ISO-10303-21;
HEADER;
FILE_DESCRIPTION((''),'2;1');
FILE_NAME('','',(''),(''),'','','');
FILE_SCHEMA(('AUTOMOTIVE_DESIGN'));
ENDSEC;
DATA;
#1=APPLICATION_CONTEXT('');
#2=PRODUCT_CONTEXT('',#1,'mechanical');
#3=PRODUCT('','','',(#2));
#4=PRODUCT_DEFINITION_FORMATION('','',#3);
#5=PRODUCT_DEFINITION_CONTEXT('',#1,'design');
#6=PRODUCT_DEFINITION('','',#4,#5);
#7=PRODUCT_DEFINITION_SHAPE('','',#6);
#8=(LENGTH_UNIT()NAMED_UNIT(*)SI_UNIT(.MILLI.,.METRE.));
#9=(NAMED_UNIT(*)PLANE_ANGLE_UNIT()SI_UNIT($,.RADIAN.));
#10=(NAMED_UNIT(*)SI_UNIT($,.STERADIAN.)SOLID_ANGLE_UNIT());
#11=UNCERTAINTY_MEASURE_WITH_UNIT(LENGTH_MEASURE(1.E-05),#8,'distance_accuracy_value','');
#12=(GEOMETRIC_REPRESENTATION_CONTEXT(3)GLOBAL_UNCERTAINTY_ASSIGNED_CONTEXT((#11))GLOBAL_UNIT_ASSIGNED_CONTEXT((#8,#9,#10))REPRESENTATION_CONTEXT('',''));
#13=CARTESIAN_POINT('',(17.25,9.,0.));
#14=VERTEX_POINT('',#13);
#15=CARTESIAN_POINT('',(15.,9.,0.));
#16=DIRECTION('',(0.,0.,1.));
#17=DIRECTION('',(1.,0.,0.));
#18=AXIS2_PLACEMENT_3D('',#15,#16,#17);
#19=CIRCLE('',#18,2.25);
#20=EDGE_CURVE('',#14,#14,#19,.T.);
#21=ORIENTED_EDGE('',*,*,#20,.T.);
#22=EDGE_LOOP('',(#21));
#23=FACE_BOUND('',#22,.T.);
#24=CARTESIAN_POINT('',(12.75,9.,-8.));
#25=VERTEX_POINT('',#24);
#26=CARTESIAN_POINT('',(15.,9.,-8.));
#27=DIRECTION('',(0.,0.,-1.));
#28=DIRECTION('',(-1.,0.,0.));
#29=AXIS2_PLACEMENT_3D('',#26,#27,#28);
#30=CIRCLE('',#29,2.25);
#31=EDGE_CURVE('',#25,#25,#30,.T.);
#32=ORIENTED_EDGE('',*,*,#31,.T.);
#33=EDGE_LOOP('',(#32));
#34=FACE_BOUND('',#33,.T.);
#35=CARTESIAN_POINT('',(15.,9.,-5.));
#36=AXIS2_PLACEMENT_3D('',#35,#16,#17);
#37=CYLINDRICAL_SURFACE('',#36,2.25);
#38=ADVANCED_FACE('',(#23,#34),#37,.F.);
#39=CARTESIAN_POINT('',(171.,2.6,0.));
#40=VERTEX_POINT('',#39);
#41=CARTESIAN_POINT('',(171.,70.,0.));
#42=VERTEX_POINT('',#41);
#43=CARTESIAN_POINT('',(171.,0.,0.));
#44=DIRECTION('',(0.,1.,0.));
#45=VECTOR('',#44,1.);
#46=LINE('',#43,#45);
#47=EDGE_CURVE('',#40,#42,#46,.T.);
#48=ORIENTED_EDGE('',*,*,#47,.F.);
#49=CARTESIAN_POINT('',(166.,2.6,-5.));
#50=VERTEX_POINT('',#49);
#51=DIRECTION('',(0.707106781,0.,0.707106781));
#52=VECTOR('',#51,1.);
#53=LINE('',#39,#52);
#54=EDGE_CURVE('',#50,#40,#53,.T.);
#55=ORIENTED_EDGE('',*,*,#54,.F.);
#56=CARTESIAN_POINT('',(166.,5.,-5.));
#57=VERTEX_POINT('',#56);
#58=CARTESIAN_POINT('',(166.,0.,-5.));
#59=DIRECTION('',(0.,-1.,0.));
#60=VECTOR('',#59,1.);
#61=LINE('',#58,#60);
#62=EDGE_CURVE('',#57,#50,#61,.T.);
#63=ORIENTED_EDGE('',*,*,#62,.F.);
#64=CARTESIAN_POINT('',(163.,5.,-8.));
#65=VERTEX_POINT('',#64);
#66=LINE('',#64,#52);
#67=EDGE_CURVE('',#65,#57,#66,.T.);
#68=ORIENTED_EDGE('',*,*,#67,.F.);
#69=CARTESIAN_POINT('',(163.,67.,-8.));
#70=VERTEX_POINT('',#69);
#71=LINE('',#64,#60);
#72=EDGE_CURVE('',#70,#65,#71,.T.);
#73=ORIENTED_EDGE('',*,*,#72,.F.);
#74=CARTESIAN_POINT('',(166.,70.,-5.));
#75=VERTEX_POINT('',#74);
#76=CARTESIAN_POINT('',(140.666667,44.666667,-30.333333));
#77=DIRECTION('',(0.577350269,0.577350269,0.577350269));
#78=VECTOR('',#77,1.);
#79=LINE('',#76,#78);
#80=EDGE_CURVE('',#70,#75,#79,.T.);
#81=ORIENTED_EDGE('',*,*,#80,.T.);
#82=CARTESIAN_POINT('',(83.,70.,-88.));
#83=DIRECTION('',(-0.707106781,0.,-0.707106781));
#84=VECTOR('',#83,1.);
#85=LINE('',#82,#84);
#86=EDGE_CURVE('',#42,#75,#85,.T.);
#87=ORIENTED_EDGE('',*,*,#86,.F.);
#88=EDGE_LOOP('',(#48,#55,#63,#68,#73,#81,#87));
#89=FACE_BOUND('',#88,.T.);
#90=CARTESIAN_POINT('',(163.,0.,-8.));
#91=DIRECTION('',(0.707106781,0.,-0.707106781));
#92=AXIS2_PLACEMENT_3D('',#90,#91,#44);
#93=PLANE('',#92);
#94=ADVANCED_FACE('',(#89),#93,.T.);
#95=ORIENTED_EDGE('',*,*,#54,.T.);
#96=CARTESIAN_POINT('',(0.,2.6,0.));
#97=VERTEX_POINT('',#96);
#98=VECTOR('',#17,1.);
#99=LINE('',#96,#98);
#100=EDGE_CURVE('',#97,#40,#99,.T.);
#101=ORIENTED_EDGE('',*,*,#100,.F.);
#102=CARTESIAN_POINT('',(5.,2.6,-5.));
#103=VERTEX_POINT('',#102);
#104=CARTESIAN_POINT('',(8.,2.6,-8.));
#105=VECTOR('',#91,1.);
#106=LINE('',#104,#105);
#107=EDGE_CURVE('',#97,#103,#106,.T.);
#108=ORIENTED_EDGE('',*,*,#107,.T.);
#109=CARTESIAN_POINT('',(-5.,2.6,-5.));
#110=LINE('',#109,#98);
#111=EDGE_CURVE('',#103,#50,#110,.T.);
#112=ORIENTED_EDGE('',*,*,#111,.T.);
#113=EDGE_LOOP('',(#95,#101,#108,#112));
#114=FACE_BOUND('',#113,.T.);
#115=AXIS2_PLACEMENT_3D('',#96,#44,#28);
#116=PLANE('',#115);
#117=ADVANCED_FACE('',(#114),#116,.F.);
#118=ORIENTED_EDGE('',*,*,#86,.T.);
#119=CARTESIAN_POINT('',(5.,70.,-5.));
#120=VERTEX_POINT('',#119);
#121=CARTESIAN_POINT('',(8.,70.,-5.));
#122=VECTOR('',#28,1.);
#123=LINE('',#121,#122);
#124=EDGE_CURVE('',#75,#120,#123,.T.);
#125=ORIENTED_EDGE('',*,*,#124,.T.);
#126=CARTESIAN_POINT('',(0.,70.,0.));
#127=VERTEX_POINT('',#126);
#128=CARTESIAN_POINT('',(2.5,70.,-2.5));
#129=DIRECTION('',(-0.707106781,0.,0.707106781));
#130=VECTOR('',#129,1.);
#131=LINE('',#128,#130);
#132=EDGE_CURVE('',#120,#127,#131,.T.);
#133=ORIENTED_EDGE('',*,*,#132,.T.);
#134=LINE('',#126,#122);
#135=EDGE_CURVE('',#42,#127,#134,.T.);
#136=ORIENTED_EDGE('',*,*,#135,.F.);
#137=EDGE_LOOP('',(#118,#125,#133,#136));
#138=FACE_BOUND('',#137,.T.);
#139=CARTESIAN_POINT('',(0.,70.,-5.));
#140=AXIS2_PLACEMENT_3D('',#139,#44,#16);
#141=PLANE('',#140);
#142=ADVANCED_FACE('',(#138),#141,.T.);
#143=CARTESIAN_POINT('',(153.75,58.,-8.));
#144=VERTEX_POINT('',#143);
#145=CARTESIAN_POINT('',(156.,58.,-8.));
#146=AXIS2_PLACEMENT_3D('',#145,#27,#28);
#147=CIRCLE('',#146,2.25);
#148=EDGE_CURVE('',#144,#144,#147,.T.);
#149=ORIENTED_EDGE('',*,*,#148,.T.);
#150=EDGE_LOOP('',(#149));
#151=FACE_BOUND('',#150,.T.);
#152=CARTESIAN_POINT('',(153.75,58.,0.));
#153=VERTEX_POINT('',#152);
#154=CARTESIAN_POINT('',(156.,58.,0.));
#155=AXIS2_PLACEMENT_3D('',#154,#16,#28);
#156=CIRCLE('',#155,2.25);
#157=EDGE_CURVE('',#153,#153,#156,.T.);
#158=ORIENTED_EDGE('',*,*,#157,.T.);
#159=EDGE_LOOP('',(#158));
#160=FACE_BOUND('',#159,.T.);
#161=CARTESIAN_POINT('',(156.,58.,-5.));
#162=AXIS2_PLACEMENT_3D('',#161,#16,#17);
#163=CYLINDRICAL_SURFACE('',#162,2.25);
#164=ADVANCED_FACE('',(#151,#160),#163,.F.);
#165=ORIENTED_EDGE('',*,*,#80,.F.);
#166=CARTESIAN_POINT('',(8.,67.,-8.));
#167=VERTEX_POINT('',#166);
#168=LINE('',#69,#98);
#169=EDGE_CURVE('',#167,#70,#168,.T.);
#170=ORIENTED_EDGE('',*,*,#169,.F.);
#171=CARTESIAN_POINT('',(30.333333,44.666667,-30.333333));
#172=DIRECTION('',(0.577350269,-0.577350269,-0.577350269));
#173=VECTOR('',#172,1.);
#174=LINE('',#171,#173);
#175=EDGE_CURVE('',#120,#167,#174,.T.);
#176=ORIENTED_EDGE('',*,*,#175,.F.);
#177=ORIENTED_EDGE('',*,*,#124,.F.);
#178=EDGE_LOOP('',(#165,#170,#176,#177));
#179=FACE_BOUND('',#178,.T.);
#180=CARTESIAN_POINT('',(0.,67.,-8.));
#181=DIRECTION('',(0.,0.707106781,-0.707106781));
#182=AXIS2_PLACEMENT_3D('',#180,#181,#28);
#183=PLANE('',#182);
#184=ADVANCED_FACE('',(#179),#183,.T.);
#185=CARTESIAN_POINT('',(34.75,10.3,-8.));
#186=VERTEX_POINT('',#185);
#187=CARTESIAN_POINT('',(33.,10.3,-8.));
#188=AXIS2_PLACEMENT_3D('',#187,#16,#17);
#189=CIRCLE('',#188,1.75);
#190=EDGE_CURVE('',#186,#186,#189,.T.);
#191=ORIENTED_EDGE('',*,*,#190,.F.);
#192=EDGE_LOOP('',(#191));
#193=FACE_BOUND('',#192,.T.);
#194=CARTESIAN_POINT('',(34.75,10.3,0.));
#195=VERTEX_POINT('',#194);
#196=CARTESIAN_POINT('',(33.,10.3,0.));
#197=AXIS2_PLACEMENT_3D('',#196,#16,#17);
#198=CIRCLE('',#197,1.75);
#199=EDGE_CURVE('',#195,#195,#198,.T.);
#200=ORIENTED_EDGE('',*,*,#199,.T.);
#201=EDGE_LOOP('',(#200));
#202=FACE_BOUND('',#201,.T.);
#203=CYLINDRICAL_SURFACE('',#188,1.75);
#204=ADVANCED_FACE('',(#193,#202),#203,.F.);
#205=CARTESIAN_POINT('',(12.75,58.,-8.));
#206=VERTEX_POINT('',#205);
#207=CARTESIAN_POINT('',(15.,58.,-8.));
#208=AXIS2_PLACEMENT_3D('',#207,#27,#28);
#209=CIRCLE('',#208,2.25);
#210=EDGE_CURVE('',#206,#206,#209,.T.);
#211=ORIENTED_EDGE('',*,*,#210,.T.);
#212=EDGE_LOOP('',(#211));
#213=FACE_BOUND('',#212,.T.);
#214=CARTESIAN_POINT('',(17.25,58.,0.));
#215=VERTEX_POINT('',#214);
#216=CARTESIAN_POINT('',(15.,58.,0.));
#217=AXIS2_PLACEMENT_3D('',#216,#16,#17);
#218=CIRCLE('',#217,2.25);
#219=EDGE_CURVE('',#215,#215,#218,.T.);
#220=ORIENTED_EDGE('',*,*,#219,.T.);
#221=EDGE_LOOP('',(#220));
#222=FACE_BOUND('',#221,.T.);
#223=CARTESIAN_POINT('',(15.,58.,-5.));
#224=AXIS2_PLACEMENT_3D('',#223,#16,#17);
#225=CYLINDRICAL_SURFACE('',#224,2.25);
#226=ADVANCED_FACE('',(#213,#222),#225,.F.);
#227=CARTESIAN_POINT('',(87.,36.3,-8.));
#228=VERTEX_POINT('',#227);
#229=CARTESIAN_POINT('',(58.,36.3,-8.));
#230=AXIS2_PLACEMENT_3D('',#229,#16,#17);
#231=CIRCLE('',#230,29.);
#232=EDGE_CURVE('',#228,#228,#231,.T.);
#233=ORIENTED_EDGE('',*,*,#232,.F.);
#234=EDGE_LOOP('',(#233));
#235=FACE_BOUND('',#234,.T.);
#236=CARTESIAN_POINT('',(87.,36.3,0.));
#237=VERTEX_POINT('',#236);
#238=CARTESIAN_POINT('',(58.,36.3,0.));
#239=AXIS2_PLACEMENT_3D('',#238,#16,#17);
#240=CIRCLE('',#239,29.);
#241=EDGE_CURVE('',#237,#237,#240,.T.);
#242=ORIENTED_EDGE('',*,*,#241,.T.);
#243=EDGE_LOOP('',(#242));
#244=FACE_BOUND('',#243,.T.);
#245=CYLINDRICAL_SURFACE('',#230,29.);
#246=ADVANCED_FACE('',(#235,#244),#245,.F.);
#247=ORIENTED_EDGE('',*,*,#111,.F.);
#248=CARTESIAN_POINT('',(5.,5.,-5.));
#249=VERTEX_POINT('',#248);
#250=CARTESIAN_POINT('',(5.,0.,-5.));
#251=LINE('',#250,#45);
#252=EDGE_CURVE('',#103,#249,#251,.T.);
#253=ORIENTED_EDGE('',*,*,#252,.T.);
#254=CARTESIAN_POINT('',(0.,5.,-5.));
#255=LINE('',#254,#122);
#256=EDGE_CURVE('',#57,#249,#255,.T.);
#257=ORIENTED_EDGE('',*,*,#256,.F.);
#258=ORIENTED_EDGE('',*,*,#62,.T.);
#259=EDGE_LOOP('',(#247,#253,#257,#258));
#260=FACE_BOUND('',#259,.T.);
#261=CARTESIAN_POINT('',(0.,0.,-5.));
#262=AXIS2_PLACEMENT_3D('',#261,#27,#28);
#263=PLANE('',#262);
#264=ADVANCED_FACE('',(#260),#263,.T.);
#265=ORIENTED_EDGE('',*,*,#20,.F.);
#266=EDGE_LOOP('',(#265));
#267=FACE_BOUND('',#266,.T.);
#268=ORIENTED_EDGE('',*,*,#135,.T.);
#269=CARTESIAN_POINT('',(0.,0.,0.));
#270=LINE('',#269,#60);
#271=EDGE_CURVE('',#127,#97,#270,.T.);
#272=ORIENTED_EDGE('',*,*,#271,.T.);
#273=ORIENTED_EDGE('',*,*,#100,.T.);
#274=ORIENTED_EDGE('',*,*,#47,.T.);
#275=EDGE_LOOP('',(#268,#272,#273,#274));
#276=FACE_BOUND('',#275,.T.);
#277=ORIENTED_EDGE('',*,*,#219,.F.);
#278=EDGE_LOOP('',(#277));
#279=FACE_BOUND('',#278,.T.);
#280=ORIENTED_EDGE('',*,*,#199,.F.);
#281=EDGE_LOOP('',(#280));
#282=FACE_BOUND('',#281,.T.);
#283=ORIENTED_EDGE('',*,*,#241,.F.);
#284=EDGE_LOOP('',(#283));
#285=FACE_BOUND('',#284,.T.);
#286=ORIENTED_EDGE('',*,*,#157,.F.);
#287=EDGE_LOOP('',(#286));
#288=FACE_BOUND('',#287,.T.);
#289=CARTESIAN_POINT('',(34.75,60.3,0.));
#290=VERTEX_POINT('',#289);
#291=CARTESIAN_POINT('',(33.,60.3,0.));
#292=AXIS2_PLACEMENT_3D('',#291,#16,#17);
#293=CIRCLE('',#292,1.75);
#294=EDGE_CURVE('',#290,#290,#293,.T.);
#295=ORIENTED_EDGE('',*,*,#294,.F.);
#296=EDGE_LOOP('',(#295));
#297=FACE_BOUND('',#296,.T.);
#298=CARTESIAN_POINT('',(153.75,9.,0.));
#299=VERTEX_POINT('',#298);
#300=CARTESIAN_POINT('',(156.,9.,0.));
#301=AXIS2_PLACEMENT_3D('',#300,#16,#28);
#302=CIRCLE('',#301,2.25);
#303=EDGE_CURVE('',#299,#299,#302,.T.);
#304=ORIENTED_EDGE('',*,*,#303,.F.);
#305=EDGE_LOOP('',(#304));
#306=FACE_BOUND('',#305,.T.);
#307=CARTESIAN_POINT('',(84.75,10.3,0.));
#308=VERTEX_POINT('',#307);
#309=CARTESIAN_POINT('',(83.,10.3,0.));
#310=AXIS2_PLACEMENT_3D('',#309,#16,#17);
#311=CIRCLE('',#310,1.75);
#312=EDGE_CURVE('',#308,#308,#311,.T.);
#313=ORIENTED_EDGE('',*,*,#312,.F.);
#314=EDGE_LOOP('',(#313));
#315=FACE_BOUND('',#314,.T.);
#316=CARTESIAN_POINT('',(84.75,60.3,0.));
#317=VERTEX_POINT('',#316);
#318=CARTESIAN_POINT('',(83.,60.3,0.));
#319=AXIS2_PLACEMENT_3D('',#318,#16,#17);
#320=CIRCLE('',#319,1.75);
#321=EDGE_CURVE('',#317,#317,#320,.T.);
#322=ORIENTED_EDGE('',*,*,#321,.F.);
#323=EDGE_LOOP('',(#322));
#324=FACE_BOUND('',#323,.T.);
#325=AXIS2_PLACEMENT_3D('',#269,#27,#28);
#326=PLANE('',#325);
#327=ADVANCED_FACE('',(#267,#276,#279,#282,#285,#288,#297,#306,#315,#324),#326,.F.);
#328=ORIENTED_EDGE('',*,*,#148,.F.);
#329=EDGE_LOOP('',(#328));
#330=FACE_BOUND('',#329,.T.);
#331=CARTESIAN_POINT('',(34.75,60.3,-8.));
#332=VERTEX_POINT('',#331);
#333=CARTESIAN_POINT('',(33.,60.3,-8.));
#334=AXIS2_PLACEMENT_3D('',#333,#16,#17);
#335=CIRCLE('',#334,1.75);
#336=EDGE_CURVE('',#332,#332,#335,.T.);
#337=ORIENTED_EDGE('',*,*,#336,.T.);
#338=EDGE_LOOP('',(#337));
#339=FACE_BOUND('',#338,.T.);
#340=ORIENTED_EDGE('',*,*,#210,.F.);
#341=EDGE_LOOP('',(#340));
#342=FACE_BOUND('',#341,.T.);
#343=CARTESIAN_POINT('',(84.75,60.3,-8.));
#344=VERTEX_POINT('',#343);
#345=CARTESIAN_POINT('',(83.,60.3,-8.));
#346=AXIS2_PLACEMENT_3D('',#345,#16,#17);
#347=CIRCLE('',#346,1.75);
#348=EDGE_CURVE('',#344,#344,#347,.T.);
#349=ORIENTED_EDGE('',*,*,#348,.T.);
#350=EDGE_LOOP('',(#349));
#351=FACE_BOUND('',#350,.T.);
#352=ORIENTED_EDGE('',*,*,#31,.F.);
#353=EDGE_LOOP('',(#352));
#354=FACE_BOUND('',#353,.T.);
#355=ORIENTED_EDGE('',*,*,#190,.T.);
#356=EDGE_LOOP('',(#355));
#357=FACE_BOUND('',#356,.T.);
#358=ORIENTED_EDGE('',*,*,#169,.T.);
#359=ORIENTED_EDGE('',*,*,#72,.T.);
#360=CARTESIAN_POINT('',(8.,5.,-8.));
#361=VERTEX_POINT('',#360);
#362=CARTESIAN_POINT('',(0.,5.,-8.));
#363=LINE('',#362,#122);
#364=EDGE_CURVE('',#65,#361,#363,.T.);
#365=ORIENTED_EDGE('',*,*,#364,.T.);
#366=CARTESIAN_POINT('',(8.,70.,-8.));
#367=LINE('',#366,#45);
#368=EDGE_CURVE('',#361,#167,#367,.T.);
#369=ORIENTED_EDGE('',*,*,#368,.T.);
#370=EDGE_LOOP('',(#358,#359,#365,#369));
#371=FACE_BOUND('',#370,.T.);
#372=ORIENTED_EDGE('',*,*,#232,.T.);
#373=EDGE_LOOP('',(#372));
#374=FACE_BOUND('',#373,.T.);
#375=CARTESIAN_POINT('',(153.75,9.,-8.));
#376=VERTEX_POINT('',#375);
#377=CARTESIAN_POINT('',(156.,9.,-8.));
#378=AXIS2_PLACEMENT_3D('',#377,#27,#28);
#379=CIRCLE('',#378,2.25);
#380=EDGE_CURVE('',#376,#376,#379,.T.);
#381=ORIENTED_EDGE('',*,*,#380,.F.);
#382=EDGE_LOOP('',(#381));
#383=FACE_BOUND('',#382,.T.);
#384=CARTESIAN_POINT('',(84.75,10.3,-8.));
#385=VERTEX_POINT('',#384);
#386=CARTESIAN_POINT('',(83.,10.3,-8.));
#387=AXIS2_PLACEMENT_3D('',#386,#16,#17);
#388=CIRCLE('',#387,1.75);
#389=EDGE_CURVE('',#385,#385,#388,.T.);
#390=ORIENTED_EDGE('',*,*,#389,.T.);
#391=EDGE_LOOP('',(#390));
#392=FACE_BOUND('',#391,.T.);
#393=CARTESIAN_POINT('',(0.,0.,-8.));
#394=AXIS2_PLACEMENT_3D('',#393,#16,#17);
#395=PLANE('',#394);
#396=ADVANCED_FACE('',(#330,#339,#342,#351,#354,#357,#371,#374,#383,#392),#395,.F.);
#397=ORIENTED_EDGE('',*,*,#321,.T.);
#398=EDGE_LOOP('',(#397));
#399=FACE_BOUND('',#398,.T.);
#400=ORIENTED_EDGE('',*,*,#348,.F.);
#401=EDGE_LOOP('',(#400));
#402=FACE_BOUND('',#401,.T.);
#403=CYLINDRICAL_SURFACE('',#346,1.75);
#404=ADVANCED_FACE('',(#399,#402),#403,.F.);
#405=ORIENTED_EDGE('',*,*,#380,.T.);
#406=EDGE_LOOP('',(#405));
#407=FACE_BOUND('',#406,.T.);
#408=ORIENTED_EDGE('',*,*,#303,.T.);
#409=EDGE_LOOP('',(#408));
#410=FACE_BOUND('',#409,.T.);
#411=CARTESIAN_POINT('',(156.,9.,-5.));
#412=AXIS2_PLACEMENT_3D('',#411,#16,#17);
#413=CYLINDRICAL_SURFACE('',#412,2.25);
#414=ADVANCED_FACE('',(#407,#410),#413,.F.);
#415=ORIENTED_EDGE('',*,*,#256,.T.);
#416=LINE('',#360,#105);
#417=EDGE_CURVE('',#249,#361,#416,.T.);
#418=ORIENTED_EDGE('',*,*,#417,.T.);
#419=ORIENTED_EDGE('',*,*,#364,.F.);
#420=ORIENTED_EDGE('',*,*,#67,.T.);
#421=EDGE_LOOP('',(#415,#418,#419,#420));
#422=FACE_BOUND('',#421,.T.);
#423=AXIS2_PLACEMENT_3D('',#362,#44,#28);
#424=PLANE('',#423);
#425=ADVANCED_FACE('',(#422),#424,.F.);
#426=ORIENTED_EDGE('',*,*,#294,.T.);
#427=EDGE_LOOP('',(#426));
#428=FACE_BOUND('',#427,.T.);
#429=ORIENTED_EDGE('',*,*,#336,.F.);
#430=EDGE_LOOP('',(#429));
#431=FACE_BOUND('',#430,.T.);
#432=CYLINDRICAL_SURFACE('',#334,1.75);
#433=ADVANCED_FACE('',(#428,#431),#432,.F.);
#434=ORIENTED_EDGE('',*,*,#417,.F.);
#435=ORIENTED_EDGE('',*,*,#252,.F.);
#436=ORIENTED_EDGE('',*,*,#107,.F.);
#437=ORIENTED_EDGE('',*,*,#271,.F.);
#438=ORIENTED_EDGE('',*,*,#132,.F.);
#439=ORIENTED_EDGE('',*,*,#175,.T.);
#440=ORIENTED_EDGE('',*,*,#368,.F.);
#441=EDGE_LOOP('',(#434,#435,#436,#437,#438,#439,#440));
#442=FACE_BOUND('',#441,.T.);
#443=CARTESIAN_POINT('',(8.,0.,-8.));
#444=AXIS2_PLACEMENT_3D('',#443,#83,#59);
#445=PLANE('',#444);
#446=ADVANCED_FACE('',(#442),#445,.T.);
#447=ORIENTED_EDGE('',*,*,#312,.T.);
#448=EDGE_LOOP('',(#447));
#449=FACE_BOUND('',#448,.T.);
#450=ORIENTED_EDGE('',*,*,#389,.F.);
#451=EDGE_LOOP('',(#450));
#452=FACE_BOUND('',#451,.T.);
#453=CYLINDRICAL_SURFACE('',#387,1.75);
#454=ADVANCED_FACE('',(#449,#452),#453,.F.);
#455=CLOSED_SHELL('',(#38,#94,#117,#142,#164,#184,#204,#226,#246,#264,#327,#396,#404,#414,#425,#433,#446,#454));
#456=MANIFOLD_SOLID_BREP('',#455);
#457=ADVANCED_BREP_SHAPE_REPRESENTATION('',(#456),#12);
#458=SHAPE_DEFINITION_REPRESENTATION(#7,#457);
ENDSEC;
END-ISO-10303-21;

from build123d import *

# Parameters (mm, degrees)
SKETCH1_W           = 171
SKETCH1_H           = 70
SKETCH1_R           = 2.25
BOSS_EXTRUDE1_DEPTH = 5
SKETCH2_W           = 171
SKETCH2_H           = 65
SKETCH2_R           = 2.25
BOSS_EXTRUDE2_DEPTH = 3
CHAMFER1_SIZE       = 8
CHAMFER3_SIZE       = 3
SKETCH3_W           = 7.071067812
SKETCH3_H           = 2.6
CUT_EXTRUDE1_DEPTH  = 199.002168661
SKETCH4_R           = 29
SKETCH4_R_2         = 1.75
CUT_EXTRUDE2_DEPTH  = 185.945938047


with BuildPart() as part:
    # Sketch1 → Boss-Extrude1 (new body)
    with BuildSketch(Plane.XY):
        with Locations((85.5, 35)):
            Rectangle(SKETCH1_W, SKETCH1_H)
        with Locations((15, 9)):
            Circle(SKETCH1_R, mode=Mode.SUBTRACT)
        with Locations(Location((156, 9, 0), (0, 0, 180))):
            Circle(SKETCH1_R, mode=Mode.SUBTRACT)
        with Locations((15, 58)):
            Circle(SKETCH1_R, mode=Mode.SUBTRACT)
        with Locations(Location((156, 58, 0), (0, 0, 180))):
            Circle(SKETCH1_R, mode=Mode.SUBTRACT)
    extrude(amount=-BOSS_EXTRUDE1_DEPTH)

    # Sketch2 → Boss-Extrude2 (add)
    with BuildSketch(Plane(origin=(0, 0, -5), x_dir=(-1, 0, 0), z_dir=(0, 0, -1))):
        with Locations((-85.5, 37.5)):
            Rectangle(SKETCH2_W, SKETCH2_H)
        with Locations(Location((-15, 9, 0), (0, 0, 180))):
            Circle(SKETCH2_R, mode=Mode.SUBTRACT)
        with Locations((-156, 9)):
            Circle(SKETCH2_R, mode=Mode.SUBTRACT)
        with Locations(Location((-15, 58, 0), (0, 0, 180))):
            Circle(SKETCH2_R, mode=Mode.SUBTRACT)
        with Locations((-156, 58)):
            Circle(SKETCH2_R, mode=Mode.SUBTRACT)
    extrude(amount=BOSS_EXTRUDE2_DEPTH)

    # Chamfer1
    # the kernel refuses this chamfer: 8 mm, written as the material it takes off along each edge
    with BuildSketch(Plane(origin=(171, -15.573463904, -8), x_dir=(-0.9996219169112968, 0, -0.027495876610586296), z_dir=(0, 1, 0)), Plane(origin=(0, 90.573463904, -8), x_dir=(0.9996219169112968, 0, -0.027495876610586275), z_dir=(0, -1, 0))) as chamfer1_piece_1:
        Polygon((CHAMFER1_SIZE * 0.999621916911, CHAMFER1_SIZE * 0.0274958766106), (-CHAMFER1_SIZE * 0.0274958766106, CHAMFER1_SIZE * 0.999621916911), (0, 0), align=None)
    extrude(amount=106.146927807, mode=Mode.SUBTRACT)

    # Chamfer3
    chamfer3_edges = [part.edges().sort_by_distance(p)[0] for p in [
        (85.5, 70, -8),
    ]]
    chamfer(chamfer3_edges, length=CHAMFER3_SIZE)

    # Sketch3 → Cut-Extrude1 (cut, through all, along a direction that is not the sketch's normal)
    with BuildSketch(Plane(origin=(85.5, 0, -85.5), x_dir=(-0.7071067811865452, 0, -0.7071067811865498), z_dir=(0.7071067811865498, 0, -0.7071067811865452))):
        with Locations((-117.379725677, 1.3)):
            Rectangle(SKETCH3_W, SKETCH3_H)
    extrude(amount=-CUT_EXTRUDE1_DEPTH, dir=(1, 0, 0), mode=Mode.SUBTRACT)

    # Sketch4 → Cut-Extrude2 (cut, through all)
    with BuildSketch(Plane.XY):
        with Locations((58, 36.3)):
            Circle(SKETCH4_R)
        with Locations((33, 60.3)):
            Circle(SKETCH4_R_2)
        with Locations((83, 60.3)):
            Circle(SKETCH4_R_2)
        with Locations((83, 10.3)):
            Circle(SKETCH4_R_2)
        with Locations((33, 10.3)):
            Circle(SKETCH4_R_2)
    extrude(amount=-CUT_EXTRUDE2_DEPTH, mode=Mode.SUBTRACT)


solid = part.part
